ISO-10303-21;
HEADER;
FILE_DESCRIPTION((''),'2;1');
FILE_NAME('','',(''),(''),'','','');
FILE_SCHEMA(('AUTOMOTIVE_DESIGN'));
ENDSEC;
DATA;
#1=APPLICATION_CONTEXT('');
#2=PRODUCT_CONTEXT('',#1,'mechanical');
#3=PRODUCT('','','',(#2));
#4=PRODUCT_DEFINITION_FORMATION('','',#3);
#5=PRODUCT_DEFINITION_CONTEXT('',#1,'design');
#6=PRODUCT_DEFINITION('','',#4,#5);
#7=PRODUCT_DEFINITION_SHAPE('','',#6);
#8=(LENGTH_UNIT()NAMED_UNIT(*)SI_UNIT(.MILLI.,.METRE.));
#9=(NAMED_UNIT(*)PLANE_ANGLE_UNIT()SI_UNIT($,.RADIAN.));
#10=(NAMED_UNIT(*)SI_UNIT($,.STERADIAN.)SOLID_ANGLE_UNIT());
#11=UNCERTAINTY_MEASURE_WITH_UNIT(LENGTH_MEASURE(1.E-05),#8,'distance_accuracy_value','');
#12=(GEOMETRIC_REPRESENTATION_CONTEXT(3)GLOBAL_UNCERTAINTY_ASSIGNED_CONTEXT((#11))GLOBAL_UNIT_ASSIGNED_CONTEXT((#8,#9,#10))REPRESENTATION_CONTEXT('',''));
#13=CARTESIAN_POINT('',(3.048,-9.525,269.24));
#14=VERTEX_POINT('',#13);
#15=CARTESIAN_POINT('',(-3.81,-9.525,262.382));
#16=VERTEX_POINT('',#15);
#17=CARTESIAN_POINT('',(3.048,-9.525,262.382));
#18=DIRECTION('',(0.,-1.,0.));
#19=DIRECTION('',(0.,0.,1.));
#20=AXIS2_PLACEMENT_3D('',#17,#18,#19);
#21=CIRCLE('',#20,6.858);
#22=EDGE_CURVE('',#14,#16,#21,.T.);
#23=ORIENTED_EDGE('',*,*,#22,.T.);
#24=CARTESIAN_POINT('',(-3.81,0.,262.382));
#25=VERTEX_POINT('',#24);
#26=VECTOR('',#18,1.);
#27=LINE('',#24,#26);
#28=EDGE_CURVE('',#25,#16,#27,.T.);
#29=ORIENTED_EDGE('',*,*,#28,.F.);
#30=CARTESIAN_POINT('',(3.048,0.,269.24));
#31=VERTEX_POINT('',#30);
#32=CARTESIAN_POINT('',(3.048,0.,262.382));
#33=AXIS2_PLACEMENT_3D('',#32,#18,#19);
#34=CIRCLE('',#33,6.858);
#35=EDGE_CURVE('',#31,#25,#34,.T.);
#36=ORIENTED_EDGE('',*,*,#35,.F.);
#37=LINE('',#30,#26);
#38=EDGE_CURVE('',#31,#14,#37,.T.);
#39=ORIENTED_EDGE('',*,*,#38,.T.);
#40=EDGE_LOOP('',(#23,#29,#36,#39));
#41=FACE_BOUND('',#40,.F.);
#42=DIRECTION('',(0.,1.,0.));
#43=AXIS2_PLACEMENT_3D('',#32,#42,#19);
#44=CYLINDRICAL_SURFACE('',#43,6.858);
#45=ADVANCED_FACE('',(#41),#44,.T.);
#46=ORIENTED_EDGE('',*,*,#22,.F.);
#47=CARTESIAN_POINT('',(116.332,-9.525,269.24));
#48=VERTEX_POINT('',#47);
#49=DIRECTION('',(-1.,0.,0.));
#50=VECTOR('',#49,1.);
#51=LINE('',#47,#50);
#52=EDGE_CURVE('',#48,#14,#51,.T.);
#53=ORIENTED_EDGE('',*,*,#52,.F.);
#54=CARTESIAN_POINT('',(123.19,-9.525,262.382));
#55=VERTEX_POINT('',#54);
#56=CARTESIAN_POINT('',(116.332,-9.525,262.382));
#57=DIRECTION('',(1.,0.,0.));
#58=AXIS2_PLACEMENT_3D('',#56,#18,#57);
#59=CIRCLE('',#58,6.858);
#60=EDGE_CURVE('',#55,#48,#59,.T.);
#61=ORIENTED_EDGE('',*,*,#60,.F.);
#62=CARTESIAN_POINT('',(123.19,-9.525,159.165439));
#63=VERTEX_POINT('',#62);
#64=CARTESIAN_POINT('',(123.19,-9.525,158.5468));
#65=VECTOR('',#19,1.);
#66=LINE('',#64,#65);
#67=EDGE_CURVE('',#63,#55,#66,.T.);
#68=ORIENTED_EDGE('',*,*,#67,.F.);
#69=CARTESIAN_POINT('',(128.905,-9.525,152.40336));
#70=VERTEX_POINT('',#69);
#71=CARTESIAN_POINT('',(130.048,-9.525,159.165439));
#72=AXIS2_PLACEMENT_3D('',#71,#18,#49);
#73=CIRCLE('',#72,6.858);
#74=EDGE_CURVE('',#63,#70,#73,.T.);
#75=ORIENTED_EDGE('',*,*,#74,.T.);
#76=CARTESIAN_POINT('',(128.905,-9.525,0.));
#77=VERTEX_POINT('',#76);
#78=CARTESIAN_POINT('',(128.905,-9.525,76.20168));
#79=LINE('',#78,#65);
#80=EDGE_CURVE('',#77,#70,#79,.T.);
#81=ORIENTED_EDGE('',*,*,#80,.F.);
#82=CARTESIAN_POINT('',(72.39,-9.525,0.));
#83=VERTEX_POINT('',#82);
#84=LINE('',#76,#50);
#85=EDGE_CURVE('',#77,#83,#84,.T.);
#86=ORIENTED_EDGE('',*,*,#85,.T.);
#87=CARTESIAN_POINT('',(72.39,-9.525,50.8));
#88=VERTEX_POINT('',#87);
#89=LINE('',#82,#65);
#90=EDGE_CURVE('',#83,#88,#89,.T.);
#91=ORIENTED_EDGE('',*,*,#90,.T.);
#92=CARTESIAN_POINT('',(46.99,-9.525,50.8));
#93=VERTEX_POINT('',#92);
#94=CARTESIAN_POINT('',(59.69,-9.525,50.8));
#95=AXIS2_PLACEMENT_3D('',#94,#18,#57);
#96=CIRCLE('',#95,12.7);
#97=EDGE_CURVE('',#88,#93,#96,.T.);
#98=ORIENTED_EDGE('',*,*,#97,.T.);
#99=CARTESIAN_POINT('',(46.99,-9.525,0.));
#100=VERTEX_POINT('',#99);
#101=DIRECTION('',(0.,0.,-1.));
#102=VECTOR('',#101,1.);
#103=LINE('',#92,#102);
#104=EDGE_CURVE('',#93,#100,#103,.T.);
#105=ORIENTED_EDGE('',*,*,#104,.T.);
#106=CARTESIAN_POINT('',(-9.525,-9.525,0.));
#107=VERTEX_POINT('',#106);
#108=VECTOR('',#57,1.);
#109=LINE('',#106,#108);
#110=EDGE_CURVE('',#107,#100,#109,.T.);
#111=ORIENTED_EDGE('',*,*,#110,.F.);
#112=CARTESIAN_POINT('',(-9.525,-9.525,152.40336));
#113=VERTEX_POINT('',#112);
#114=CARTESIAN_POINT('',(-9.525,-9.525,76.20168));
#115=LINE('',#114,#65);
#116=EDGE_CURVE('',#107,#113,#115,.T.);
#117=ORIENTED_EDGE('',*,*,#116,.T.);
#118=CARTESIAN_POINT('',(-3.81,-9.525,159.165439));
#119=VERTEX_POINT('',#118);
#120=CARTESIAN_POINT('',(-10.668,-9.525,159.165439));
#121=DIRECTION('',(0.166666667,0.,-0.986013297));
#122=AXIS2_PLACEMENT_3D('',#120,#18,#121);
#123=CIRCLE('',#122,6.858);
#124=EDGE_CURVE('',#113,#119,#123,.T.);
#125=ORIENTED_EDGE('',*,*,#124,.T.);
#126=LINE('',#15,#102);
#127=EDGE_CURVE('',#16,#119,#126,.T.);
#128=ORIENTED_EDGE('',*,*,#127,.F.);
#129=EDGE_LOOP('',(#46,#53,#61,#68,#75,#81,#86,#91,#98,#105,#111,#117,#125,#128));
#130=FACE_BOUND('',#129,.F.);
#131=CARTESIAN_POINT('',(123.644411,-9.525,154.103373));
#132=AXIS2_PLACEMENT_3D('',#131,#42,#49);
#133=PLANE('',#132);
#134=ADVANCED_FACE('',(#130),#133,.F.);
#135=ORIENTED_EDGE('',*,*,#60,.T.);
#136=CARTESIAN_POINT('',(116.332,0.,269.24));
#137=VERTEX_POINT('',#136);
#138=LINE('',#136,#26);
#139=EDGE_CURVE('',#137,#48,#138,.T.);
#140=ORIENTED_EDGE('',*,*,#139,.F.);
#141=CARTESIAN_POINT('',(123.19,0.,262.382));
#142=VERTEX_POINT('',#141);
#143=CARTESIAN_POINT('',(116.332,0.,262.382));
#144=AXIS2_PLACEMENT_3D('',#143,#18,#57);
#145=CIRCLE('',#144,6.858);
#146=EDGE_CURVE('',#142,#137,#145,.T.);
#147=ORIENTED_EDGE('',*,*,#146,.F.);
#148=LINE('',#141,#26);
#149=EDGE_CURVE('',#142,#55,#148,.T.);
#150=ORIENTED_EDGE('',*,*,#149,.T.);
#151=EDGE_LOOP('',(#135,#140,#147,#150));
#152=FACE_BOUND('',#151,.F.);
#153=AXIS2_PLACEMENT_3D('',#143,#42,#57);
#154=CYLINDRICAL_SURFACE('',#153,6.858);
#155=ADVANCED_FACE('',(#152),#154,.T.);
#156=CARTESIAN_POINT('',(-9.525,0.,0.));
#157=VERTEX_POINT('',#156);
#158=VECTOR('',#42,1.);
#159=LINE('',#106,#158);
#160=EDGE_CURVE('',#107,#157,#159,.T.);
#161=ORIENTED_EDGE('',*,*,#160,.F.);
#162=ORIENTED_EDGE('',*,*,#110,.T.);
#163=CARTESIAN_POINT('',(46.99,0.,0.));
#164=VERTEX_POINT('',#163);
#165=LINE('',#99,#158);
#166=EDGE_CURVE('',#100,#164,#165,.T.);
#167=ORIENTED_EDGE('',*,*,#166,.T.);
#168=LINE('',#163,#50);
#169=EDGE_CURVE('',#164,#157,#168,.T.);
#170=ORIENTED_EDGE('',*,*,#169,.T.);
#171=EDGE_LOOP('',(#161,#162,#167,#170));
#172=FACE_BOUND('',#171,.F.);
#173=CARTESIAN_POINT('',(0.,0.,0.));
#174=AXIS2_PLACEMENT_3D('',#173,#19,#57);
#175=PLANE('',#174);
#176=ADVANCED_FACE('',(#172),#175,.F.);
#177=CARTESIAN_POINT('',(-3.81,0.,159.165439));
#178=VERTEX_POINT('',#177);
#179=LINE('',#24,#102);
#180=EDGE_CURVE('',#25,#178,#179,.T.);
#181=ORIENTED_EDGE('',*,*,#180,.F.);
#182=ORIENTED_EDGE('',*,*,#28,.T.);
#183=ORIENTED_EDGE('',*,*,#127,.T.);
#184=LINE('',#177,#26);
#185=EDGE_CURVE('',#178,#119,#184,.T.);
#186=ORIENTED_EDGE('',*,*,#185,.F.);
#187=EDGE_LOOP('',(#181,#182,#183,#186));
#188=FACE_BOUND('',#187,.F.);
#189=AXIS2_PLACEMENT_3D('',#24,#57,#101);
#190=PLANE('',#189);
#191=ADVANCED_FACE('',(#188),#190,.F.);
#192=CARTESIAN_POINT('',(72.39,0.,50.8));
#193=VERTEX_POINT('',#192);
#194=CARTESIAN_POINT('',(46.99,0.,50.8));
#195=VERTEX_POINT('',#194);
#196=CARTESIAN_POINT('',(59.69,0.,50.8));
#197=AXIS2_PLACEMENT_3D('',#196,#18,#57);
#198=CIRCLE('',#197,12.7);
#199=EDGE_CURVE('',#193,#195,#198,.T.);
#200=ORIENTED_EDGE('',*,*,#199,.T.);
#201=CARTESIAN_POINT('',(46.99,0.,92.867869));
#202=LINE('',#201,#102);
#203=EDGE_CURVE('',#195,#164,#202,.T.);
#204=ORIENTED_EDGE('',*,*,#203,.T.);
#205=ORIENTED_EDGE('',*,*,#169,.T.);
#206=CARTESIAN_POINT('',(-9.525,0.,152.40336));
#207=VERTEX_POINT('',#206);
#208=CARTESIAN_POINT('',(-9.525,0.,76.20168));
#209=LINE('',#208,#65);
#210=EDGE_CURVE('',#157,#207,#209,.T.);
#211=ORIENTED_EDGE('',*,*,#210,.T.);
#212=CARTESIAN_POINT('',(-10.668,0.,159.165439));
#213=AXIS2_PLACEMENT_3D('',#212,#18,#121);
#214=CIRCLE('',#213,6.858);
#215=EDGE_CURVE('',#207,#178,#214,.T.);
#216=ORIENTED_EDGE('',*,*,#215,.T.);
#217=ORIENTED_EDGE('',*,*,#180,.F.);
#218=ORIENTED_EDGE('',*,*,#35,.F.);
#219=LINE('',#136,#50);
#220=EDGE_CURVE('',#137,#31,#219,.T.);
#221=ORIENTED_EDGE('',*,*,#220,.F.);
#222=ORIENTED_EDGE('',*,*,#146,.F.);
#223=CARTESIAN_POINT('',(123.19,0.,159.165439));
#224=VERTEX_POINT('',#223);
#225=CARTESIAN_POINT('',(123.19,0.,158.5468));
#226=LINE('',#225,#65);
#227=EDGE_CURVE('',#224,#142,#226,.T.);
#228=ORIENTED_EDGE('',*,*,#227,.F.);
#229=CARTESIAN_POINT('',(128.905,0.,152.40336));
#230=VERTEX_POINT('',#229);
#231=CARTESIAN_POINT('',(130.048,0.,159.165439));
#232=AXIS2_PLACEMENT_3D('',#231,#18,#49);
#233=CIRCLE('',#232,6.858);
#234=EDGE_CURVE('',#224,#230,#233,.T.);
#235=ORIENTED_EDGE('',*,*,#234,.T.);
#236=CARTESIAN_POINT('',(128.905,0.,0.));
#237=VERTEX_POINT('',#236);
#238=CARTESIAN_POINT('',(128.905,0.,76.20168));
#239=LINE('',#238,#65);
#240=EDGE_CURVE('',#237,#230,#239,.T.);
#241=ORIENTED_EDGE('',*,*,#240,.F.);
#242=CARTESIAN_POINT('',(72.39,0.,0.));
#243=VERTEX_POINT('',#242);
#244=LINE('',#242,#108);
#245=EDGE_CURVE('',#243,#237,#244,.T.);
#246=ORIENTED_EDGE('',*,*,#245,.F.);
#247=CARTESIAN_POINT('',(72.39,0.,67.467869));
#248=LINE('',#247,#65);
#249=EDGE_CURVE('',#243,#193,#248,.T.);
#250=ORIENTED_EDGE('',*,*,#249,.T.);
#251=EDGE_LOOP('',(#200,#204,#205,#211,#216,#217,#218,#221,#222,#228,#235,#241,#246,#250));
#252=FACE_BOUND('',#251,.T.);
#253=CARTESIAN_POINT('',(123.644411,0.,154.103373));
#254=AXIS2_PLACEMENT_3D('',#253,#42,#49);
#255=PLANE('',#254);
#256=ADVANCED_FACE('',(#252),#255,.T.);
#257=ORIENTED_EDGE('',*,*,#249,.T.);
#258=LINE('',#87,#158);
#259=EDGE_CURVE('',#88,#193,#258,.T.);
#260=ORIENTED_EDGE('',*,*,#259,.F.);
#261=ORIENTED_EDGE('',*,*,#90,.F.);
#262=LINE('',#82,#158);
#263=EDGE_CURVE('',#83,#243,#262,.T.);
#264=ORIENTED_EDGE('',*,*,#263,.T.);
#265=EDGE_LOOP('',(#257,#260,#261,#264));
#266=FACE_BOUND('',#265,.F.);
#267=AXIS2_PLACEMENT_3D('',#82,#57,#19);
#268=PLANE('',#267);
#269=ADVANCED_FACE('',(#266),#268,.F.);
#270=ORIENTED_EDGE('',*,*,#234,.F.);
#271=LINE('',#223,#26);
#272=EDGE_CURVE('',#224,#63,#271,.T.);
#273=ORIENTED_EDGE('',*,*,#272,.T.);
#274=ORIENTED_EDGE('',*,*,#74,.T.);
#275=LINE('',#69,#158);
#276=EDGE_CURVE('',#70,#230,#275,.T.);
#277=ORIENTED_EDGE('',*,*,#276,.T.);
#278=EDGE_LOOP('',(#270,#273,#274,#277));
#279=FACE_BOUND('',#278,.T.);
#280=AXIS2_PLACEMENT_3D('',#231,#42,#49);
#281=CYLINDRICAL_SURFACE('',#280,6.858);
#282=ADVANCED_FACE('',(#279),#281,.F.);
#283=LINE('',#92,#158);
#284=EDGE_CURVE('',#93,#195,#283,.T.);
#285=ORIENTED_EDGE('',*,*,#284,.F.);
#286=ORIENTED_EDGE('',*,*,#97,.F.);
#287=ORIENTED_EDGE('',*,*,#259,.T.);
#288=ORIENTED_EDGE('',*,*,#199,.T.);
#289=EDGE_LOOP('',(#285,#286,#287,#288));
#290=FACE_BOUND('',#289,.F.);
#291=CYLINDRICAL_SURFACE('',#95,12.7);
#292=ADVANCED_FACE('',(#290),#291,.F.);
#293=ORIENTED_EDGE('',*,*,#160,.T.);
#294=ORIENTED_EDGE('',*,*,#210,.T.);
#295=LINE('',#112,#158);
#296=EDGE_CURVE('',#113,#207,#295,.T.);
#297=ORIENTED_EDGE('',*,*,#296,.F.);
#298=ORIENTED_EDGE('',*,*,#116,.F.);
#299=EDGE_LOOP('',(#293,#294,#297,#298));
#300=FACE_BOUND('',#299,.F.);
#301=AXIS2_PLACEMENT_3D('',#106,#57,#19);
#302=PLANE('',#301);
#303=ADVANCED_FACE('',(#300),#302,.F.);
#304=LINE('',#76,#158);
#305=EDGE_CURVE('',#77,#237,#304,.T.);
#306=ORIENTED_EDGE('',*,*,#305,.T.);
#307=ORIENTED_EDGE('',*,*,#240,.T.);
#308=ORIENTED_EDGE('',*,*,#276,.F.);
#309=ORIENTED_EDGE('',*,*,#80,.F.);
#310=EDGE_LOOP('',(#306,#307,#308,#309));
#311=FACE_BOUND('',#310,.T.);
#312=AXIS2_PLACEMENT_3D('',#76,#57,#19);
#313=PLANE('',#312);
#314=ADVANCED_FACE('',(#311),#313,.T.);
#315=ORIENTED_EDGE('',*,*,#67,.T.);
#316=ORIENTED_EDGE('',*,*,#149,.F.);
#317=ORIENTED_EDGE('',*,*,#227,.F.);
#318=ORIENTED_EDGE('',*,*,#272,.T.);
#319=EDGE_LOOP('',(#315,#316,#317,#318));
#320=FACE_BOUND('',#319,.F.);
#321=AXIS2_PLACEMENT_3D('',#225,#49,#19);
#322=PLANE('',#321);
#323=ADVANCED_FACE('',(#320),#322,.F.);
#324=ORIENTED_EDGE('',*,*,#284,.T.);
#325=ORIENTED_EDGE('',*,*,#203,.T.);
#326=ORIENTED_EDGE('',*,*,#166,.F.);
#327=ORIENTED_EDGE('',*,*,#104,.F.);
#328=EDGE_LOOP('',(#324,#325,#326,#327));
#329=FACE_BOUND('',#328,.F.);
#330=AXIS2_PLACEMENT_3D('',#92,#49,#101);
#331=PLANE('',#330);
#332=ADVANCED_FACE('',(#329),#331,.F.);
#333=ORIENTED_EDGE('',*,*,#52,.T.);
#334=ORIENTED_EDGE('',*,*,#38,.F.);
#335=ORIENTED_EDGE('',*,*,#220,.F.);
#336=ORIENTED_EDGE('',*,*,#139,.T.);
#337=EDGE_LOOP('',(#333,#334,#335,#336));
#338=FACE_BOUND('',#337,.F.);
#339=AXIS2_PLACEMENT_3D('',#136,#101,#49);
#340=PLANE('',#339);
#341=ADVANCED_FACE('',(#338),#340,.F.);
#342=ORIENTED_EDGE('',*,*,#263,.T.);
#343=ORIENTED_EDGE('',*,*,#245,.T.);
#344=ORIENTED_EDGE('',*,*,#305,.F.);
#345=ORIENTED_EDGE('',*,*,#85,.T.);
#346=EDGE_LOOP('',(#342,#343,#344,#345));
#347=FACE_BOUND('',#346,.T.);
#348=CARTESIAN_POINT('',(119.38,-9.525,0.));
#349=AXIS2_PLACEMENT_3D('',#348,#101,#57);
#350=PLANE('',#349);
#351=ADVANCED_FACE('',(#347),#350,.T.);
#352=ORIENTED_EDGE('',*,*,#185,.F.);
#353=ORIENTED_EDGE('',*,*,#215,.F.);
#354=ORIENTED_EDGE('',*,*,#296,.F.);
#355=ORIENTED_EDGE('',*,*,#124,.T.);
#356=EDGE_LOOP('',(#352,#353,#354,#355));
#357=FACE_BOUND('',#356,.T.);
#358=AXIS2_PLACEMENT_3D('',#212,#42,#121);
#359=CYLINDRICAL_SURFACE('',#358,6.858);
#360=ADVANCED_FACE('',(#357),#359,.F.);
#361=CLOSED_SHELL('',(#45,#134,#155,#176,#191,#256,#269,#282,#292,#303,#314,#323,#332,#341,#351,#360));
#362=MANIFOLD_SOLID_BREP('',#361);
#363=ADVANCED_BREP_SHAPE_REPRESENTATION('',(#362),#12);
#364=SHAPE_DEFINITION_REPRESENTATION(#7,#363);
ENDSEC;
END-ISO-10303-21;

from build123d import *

# Parameters (mm, degrees)
F1_DEPTH    = 9.525
F3_DEPTH    = 25.4
F4_W        = 9.525
F4_H        = 152.4033595958
F5_DEPTH    = 9.525
F6_T1_DEPTH = 9.525


# Not quite as in the source:
# - a fillet or chamfer that OpenCascade refuses, or shapes differently, is made with other operations: its cross-section is extruded or revolved along the edge and cut away or added


with BuildPart() as f1:
    # F0 (on Front) → F1 (new body)
    with BuildSketch(Plane.XZ):
        with BuildLine():
            Line((0, 152.4033595958), (0, 0))
            Line((0, 0), (119.38, 0))
            Line((119.38, 0), (119.38, 152.4033595958))
            ThreePointArc((119.38, 152.4033595958), (122.160179304, 154.9323166344), (123.19, 158.5468))
            Line((123.19, 158.5468), (123.19, 262.382))
            ThreePointArc((123.19, 262.382), (121.1813383054, 267.2313383054), (116.332, 269.24))
            Line((116.332, 269.24), (3.048, 269.24))
            ThreePointArc((3.048, 269.24), (-1.8013383054, 267.2313383054), (-3.81, 262.382))
            Line((-3.81, 262.382), (-3.81, 158.5468))
            ThreePointArc((-3.81, 158.5468), (-2.780179304, 154.9323166344), (0, 152.4033595958))
        make_face()
    extrude(amount=F1_DEPTH)

    # F2 (on face) → F3 (cut)
    with BuildSketch(Plane.XZ.offset(9.525)):
        with BuildLine():
            Line((46.99, 50.8), (46.99, 0))
            Line((46.99, 0), (72.39, 0))
            Line((72.39, 0), (72.39, 50.8))
            ThreePointArc((72.39, 50.8), (59.69, 63.5), (46.99, 50.8))
        make_face()
    extrude(amount=-F3_DEPTH, mode=Mode.SUBTRACT)

    # F4 (on face) → F5 (join)
    with BuildSketch(Plane.XZ.offset(9.525)):
        with Locations((124.1425, 76.2016797979)):
            Rectangle(F4_W, F4_H)
        with Locations((-4.7625, 76.2016797979)):
            Rectangle(F4_W, F4_H)
    extrude(amount=-F5_DEPTH)

    # F6: fillet of radius 6.858 on 2 edges, made by hand

    # F6_s2 → F6_t1 (join)
    with BuildSketch(Plane.XZ):
        with BuildLine():
            ThreePointArc((123.19, 159.1654387879), (124.8101159807, 154.7386188232), (128.905, 152.4033595958))
            Line((128.905, 152.4033595958), (128.7907, 151.7271516766))
            ThreePointArc((128.7907, 151.7271516766), (124.1425, 151.7175595958), (119.38, 151.7175595958))
            Line((119.38, 151.7175595958), (119.0752, 153.0177036362))
            ThreePointArc((119.0752, 153.0177036362), (122.5042, 158.5468), (122.5042, 159.1654387879))
            Line((122.5042, 159.1654387879), (123.19, 159.1654387879))
        make_face()
        with BuildLine():
            ThreePointArc((-9.525, 152.4033595958), (-5.4301159807, 154.7386188232), (-3.81, 159.1654387879))
            Line((-3.81, 159.1654387879), (-3.1242, 159.1654387879))
            ThreePointArc((-3.1242, 159.1654387879), (-3.1242, 158.5468), (0.3048, 153.0177036362))
            Line((0.3048, 153.0177036362), (0, 151.7175595958))
            ThreePointArc((0, 151.7175595958), (-4.7625, 151.7175595958), (-9.4107, 151.7271516766))
            Line((-9.4107, 151.7271516766), (-9.525, 152.4033595958))
        make_face()
    extrude(amount=F6_T1_DEPTH)


solid = f1.part
